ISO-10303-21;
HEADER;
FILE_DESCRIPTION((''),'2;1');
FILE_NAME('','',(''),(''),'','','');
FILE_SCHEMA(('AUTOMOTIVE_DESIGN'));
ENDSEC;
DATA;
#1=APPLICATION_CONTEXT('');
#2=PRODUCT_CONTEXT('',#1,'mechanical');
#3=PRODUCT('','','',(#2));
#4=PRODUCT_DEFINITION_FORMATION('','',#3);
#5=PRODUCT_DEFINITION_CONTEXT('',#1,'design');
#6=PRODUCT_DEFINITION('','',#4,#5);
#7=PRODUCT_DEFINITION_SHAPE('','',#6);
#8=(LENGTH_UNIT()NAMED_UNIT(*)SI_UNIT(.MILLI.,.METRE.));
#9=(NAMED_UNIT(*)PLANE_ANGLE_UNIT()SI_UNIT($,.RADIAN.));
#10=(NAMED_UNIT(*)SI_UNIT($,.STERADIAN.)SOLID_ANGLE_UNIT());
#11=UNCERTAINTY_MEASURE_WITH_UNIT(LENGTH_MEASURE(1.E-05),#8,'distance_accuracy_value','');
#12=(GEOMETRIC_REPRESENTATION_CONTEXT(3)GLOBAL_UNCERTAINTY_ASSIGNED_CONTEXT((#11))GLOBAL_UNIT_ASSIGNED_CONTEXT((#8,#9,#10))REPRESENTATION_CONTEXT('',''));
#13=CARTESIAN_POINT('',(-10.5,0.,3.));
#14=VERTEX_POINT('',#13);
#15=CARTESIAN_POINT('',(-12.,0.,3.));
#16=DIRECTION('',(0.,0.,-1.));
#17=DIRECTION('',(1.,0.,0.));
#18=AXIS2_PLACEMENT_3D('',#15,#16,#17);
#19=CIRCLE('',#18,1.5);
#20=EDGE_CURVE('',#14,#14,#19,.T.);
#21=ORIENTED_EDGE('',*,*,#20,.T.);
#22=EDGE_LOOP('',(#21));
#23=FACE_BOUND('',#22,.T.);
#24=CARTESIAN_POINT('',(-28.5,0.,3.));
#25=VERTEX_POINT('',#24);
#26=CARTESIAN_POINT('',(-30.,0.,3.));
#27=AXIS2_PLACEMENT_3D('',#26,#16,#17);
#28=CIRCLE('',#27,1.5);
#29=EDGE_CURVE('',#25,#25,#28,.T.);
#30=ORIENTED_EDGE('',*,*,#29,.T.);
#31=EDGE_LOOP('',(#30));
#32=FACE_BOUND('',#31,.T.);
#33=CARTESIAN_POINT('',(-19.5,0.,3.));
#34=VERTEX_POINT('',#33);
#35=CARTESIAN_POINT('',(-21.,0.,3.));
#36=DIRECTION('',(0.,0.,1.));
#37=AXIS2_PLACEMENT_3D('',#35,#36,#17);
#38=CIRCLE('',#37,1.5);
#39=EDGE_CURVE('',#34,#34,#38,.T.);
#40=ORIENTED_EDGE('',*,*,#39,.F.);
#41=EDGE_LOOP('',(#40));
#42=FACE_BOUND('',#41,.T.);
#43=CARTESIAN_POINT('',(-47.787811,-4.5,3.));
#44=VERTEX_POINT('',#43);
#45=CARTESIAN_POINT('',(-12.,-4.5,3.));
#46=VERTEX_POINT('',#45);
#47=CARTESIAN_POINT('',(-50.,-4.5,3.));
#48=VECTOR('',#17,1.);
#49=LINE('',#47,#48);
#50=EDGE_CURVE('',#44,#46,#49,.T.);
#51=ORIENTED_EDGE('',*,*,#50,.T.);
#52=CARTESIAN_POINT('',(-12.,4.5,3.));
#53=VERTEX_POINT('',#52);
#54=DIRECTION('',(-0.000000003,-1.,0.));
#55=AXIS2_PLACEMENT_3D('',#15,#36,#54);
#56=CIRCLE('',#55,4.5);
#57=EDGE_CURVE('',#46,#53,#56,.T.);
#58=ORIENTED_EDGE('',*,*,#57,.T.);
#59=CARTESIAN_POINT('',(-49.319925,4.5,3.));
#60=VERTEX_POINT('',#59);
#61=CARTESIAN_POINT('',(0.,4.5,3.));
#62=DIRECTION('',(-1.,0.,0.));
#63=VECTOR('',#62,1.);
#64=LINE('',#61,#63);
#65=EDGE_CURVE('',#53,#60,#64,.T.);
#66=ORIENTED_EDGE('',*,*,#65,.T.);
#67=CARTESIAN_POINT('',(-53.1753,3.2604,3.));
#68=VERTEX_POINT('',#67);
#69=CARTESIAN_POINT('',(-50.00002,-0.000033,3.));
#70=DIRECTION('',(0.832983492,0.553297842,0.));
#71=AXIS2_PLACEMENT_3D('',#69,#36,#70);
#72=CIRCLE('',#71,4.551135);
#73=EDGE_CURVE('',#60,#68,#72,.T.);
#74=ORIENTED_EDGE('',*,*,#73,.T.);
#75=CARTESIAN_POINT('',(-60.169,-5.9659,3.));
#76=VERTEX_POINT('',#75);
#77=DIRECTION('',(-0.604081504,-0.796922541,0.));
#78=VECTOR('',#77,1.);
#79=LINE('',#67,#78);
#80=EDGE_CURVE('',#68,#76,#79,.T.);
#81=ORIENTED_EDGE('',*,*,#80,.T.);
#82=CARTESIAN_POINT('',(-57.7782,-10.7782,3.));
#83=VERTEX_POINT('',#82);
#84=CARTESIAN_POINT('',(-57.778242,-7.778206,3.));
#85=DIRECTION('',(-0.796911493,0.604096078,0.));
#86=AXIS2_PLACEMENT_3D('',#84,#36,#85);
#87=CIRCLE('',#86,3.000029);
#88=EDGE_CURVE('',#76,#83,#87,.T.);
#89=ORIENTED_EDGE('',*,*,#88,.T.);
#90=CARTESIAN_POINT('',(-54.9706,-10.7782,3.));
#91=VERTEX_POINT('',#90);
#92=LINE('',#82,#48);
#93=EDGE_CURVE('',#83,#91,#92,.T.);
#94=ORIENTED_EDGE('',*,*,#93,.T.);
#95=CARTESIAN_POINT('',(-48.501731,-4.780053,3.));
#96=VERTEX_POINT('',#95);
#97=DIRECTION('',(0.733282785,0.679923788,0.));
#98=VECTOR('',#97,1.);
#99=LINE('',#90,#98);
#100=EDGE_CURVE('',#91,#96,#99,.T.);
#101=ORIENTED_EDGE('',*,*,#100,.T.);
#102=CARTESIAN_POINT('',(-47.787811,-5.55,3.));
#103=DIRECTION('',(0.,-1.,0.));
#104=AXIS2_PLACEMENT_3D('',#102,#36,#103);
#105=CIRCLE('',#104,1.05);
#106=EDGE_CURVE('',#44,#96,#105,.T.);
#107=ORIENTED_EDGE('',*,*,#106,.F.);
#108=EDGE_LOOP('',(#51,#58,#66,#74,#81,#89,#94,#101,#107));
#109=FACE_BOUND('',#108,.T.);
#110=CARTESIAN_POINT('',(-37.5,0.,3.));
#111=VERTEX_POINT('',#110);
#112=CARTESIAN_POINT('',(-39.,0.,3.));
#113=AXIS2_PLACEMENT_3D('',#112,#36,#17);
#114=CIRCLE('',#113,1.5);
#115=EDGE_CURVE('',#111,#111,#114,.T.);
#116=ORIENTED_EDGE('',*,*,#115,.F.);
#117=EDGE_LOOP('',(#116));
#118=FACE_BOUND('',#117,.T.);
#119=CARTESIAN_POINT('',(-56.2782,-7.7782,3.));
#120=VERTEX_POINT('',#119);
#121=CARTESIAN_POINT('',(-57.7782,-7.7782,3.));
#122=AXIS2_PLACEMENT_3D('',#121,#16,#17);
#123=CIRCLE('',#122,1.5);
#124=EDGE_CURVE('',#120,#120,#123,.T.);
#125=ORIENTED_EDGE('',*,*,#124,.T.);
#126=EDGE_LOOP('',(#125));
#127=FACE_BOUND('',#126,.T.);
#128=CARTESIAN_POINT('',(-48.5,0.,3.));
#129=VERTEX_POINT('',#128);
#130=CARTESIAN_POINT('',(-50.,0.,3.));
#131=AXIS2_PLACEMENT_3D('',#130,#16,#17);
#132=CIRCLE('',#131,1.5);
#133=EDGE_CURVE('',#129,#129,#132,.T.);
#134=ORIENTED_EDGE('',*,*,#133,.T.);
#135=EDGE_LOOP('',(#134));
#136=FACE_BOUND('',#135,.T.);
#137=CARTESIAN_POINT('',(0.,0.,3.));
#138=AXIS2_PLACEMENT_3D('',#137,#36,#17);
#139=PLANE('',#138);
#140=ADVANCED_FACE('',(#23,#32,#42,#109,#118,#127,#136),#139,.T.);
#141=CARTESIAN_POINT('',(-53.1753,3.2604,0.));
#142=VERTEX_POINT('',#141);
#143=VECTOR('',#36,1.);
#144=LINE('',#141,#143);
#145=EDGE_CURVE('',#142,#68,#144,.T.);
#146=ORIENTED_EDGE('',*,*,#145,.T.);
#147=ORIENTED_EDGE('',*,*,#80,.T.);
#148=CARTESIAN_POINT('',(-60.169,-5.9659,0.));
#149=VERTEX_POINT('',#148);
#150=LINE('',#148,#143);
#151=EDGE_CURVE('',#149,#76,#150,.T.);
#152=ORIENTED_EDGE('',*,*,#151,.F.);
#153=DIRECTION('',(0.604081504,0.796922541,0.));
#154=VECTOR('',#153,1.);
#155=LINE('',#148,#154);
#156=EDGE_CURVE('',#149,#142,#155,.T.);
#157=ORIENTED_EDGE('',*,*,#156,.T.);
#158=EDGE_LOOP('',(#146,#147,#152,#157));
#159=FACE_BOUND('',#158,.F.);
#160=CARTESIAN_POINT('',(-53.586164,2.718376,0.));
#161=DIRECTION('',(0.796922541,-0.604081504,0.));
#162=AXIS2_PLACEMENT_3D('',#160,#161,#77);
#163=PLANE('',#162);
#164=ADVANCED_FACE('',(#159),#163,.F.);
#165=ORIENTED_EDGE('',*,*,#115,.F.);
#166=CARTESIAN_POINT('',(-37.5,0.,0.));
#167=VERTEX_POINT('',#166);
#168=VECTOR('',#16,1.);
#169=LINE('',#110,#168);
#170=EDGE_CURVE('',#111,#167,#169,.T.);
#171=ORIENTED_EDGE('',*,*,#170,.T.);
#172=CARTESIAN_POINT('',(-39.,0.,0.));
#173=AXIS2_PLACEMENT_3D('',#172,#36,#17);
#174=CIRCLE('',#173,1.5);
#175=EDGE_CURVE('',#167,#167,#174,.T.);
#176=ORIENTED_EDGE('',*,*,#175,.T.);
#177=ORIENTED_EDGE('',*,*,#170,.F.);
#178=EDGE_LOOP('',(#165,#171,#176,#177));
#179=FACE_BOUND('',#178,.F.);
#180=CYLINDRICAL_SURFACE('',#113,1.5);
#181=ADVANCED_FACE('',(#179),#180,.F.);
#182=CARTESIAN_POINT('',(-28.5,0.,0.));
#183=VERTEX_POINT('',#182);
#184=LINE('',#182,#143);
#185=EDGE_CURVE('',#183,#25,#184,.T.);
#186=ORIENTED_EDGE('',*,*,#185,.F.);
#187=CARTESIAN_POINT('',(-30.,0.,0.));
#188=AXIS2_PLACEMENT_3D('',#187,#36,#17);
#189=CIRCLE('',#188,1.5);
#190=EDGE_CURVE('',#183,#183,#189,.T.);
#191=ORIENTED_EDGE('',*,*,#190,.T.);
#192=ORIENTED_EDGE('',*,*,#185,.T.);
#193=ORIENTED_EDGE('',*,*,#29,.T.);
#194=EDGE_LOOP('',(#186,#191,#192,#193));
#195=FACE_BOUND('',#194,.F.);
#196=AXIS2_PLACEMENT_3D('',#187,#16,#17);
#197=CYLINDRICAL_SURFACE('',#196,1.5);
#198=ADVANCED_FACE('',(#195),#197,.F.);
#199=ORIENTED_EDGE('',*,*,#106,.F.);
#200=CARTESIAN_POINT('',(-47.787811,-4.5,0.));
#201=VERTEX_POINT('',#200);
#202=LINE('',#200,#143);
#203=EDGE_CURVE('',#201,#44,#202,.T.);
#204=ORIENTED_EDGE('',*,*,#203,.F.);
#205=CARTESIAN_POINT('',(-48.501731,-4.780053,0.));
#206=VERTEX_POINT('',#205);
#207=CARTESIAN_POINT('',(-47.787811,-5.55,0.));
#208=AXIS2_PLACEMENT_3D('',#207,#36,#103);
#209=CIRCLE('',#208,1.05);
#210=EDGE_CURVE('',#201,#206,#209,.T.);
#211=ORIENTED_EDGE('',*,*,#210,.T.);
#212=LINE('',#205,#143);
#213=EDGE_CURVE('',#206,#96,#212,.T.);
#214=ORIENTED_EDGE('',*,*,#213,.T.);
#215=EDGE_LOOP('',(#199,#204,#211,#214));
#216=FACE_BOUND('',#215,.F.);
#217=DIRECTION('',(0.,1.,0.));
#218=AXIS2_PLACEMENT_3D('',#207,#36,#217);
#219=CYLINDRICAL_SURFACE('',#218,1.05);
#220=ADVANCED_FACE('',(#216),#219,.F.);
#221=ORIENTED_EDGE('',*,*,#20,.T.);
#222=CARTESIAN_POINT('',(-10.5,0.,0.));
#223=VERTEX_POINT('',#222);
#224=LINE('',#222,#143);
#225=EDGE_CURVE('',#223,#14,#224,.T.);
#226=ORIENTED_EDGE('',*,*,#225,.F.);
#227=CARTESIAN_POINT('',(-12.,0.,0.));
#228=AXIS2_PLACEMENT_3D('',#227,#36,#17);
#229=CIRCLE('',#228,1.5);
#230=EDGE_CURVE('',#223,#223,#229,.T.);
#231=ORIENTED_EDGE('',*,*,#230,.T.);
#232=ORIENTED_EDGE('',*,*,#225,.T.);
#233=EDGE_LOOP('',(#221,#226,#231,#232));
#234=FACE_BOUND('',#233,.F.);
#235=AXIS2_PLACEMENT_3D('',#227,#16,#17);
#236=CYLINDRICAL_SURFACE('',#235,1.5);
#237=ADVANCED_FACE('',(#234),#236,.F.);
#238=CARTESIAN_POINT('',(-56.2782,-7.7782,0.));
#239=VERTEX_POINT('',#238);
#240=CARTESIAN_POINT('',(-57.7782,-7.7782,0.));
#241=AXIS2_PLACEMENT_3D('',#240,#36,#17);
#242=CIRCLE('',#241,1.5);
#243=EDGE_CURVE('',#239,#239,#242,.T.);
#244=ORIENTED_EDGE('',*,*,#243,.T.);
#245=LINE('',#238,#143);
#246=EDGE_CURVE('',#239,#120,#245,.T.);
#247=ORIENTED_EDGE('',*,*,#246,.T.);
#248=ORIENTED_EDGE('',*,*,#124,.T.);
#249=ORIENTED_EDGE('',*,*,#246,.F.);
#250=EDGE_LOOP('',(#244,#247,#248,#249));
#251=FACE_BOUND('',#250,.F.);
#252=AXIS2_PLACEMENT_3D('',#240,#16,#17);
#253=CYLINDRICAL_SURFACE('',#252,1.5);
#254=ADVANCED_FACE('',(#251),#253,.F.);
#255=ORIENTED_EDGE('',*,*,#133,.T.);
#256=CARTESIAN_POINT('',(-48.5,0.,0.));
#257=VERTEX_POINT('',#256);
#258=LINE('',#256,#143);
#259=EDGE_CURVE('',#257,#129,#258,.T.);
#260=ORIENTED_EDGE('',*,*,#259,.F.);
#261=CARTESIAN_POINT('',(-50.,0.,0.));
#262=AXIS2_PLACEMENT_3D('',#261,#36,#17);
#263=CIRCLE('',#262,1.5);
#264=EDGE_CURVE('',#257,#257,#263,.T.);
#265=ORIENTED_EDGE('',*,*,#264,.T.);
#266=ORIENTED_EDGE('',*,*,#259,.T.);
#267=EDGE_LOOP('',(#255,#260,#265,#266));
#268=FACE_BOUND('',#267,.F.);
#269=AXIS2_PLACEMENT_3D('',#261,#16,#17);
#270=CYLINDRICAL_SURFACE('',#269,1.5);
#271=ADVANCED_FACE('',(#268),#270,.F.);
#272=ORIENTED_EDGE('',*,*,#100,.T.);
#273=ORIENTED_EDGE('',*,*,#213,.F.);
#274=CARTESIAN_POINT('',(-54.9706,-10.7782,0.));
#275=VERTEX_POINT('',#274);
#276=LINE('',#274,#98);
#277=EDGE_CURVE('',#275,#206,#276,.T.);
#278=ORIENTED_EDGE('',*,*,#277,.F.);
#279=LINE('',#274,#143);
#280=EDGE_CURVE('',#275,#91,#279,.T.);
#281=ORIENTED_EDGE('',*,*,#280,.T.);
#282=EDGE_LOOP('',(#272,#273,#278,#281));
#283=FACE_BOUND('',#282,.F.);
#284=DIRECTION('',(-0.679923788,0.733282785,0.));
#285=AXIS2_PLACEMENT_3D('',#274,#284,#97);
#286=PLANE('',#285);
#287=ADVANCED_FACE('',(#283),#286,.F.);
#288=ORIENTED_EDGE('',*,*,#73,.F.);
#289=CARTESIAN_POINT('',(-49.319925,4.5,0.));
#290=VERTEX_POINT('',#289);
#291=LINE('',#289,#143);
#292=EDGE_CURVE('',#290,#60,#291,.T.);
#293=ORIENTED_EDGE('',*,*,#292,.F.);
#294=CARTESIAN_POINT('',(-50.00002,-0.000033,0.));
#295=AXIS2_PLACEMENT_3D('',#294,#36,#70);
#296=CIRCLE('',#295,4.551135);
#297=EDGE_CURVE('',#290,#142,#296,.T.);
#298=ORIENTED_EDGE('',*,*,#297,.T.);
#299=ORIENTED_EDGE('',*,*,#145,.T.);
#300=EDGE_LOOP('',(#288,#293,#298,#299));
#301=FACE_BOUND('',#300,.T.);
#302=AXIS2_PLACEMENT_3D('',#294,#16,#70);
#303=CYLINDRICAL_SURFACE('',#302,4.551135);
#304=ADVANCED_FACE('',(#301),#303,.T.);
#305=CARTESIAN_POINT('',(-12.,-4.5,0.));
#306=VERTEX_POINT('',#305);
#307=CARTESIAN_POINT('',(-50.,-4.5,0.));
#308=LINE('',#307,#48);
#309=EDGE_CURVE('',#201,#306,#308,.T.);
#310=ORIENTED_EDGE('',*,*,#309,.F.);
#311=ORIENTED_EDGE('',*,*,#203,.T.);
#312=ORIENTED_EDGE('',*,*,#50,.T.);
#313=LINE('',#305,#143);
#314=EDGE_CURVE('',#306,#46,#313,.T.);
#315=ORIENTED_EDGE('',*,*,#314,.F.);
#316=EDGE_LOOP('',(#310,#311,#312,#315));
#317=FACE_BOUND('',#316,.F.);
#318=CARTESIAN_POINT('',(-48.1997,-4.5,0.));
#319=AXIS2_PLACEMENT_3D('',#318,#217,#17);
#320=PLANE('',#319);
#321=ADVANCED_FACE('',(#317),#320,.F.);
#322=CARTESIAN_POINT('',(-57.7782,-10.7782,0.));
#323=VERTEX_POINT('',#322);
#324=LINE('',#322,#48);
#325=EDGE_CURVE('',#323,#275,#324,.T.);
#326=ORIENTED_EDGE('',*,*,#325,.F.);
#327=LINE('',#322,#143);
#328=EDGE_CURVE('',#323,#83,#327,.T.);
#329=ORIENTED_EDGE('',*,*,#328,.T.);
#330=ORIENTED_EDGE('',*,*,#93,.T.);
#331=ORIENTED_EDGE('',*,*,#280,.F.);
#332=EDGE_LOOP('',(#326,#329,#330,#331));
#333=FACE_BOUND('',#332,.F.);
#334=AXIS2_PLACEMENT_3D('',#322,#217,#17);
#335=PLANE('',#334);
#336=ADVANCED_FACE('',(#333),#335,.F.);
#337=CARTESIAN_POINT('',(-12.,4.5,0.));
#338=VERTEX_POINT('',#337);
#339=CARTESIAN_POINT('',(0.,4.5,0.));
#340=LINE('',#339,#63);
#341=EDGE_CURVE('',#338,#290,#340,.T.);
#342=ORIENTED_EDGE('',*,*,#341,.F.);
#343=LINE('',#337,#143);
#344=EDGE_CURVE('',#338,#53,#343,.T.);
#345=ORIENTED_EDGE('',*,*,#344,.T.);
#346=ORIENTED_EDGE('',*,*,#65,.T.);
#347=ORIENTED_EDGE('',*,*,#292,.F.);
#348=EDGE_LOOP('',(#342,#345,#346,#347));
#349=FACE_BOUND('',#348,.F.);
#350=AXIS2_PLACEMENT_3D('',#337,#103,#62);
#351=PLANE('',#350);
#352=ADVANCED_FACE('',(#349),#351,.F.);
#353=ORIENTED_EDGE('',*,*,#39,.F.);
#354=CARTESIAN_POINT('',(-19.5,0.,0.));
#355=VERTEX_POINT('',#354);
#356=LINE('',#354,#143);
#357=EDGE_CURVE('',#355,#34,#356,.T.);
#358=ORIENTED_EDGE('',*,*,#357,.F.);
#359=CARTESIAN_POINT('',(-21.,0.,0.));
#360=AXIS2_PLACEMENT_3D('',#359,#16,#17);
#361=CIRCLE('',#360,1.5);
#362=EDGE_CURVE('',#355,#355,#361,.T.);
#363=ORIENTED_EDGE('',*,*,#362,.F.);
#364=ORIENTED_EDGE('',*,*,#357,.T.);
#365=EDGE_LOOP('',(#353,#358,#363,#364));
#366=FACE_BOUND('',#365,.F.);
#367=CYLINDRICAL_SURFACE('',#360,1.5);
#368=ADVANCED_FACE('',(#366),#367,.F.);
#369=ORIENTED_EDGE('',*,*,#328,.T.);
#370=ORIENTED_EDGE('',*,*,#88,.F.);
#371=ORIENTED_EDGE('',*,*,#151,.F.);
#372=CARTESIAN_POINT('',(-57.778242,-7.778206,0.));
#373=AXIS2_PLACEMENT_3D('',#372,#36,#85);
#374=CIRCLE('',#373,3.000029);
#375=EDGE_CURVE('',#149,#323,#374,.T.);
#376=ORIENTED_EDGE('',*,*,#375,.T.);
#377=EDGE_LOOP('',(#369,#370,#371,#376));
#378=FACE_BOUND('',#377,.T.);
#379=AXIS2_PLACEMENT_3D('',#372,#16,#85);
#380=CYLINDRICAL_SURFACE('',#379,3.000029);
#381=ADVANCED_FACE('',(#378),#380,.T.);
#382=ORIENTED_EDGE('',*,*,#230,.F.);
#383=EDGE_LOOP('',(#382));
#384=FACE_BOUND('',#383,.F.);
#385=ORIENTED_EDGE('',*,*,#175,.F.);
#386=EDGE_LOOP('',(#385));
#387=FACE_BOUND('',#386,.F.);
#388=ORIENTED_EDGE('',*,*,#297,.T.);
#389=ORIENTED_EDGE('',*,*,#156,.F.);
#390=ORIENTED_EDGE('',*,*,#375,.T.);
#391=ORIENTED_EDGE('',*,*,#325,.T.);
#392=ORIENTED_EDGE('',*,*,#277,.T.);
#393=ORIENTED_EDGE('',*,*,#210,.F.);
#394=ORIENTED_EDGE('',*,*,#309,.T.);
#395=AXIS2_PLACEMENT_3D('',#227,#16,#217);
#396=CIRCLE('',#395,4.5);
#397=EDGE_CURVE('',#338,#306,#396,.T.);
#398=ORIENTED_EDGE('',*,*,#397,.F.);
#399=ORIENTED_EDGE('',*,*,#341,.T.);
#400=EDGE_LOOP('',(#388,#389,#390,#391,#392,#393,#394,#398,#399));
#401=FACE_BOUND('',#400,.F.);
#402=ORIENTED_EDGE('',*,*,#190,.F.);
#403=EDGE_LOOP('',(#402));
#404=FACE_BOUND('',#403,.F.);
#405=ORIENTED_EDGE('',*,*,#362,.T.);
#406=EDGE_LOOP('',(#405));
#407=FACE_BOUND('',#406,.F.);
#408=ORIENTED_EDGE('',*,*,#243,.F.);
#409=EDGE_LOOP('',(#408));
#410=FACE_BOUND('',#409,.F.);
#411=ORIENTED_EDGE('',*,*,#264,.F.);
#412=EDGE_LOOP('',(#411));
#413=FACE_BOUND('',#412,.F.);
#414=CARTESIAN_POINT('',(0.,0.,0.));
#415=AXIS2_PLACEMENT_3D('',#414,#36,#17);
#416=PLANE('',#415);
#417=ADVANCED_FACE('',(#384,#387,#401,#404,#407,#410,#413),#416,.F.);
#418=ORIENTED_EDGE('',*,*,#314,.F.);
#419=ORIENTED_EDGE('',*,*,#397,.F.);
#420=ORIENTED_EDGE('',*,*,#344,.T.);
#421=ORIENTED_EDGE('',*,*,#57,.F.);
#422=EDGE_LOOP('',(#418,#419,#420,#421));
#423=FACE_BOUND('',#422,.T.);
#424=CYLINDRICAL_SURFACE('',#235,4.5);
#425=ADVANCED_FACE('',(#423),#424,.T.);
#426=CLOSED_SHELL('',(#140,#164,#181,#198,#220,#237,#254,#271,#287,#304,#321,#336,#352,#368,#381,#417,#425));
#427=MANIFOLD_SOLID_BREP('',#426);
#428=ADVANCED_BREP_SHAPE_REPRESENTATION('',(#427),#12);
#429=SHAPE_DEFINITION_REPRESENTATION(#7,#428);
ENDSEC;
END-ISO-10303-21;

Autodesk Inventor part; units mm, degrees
ref_plane "YZ Plane" through (0, 0, 0) normal (1, 0, 0) x (0, 1, 0)
ref_plane "XZ Plane" through (0, 0, 0) normal (0, 1, 0) x (-1, 0, 0)
ref_plane "XY Plane" through (0, 0, 0) normal (0, 0, 1) x (1, 0, 0)
sketch "スケッチ1" plane through (0, 0, 0) normal (0, 0, 1) x (1, 0, 0)
  circle A0 centre (-55, 0) radius 8.025 construction
  circle A1 centre (0, 0) radius 1.25 construction
  arc A2 (-44.5788, 6) -> (-63.6661, 8.3366) centre (-55, 0) ccw construction
  line L0 (-63.6661, 8.3366) -> (-109.1623, -38.9576) construction
  line L1 (-102.7709, -46.5745) -> (-48.2949, -9.9821) construction
  arc A3 (-48.2949, -9.9821) -> (-44.5788, -6) centre (-55, 0) ccw construction
  line L2 (-44.5788, -6) -> (-5.2915, -6) construction
  arc A4 (-5.2915, -6) -> (-5.2915, 6) centre (0, 0) ccw construction
  line L3 (-5.2915, 6) -> (-44.5788, 6) construction
  circle A5 centre (0, 0) radius 1.5
  circle A6 centre (-30, 0) radius 1.5
  circle A7 centre (-12, 0) radius 1.5
  circle A8 centre (-21, 0) radius 1.5
  line L4 (-30, 0) -> (0, 0)
  line L5 (-30, 0) -> (-50, 0)
  line L6 (-50, 0) -> (-30, 0)
  circle A9 centre (-50, 0) radius 1.5
  circle A10 centre (-50, 0) radius 4.025 construction
  circle A11 centre (-50, 0) radius 7.125 construction
  circle A12 centre (-57.7782, -7.7782) radius 1.5
  circle A13 centre (-57.7782, -7.7782) radius 3 construction
  line L7 (-50, 0) -> (-57.7782, -7.7782) construction
  line L8 (-53.1753, 3.2604) -> (-60.169, -5.9659)
  line L9 (-55.3874, -9.5904) -> (-46.209, 2.5181)
  arc A14 (-46.209, 2.5181) -> (-53.1753, 3.2604) centre (-50, 0) ccw
  arc A15 (-60.169, -5.9659) -> (-55.3874, -9.5904) centre (-57.7782, -7.7782) ccw
  line L10 (-50, 0) -> (0, 0) construction
  line L11 (-50, -4.5) -> (0, -4.5)
  line L12 (0, 4.5) -> (-50, 4.5)
  arc A16 (-50, 4.5) -> (-50, -4.5) centre (-50, 0) ccw
  arc A17 (0, -4.5) -> (0, 4.5) centre (0, 0) ccw
  line L13 (-57.7782, -10.7782) -> (-54.9706, -10.7782)
  line L14 (-54.9706, -10.7782) -> (-48.1997, -4.5)
  line L15 (-50, 0) -> (-57.7782, -7.7782)
  circle A18 centre (-12, 0) radius 4.5
  point P0 (-53.8891, -3.8891)
  point P1 (-25, 0)
  point P2 (-48.7574, -3)
  point P3 (-49.3198, 4.5)
  point P4 (-53.5862, 2.7184)
  point P5 (-51.3675, -4.2872)
  point P6 (-12, -4.5)
  point P7 (-12, 4.5)
  dimension "d25" = 3
  dimension "d26" = 0
  dimension "d0" = 20
  dimension "d2" = 3
  dimension "d3" = 8.05
  dimension "d4" = 3.1
  dimension "d5" = 30
  dimension "d6" = 3
  dimension "d7" = 3
  dimension "d8" = 3
  dimension "d9" = 3
  dimension "d11" = 9
  dimension "d13" = 3
  dimension "d14" = 6
  dimension "d15" = 6
  dimension "d16" = 9
  dimension "d21" = 135
  dimension "d22" = 10
  dimension "d30" = 9
  dimension "d31" = 11
extrude "押し出し1" add sketch "スケッチ1" along normal blind 3 contours L4 A8 A18 L11 A16 L9 L5 A6 | A6 L5 L9 A14 L12 A18 L4 A8 | L9 A9 L5 | L5 A9 L15 A16 L12 A14 L9 | L9 A16 L15 A9 | A18 L4 A7 | L4 A7 A18 | A16 L11 L14 L13 A15 L9 | L9 A15 L8 A16 | L12 A16 L8 A14
fillet "フィレット1" radius 1.05 1 edges at (-48.1997, -4.5, 1.5)
sketch "スケッチ2" plane through (0, 0, 3) normal (0, 0, 1) x (1, 0, 0)
  arc A0 (-60.7927, -6.5251) -> (-59.7797, -5.8711) centre (-60.7525, -5.4759) ccw
  arc A1 (-55.3849, -4.4725) -> (-59.7797, -5.8711) centre (-57.0004, -7.0004) ccw
  arc A2 (-55.3849, -4.4725) -> (-43.7567, 3.1657) centre (-50, 0) ccw
  arc A3 (-44.0452, 4.6286) -> (-43.7567, 3.1657) centre (-43.1001, 4.055) ccw
  line L0 (-44.0452, 4.6286) -> (-41.5381, 8.9709)
  arc A4 (-41.5381, 8.9709) -> (-46.5567, 11.6351) centre (-44, 10.3923) ccw
  line L1 (-46.5567, 11.6351) -> (-49.0637, 7.2927)
  arc A5 (-50.5985, 6.9744) -> (-49.0637, 7.2927) centre (-49.9731, 7.8177) ccw
  arc A6 (-50.5985, 6.9744) -> (-50.2678, 6.9949) centre (-50, 0) ccw
  circle A7 centre (-50, 0) radius 4.025
  circle A8 centre (-50, 0) radius 1.5 projected
  circle A9 centre (-39, 0) radius 4
  line L2 (-50, 0) -> (-38.3804, 0)
  circle A10 centre (-39, 0) radius 1.5
  circle A11 centre (-30, 0) radius 1.5 projected
  point P0 (0, 0)
  point P1 (-43.3711, 2.3255)
  point P2 (-43, 0)
  point P3 (-49.3534, 6.9701)
  point P4 (-44.1966, 3.9141)
  point P5 (-43.7567, 3.1657)
  dimension "d23" = 12
  dimension "d24" = 8
  dimension "d27" = 3
  dimension "d28" = 9
  dimension "d29" = 7
extrude "押し出し2" cut sketch "スケッチ2" against normal blind 3 contours A10
properties part number "中間節アーム先端締結パーツ内" material "アルミニウム 7075"
